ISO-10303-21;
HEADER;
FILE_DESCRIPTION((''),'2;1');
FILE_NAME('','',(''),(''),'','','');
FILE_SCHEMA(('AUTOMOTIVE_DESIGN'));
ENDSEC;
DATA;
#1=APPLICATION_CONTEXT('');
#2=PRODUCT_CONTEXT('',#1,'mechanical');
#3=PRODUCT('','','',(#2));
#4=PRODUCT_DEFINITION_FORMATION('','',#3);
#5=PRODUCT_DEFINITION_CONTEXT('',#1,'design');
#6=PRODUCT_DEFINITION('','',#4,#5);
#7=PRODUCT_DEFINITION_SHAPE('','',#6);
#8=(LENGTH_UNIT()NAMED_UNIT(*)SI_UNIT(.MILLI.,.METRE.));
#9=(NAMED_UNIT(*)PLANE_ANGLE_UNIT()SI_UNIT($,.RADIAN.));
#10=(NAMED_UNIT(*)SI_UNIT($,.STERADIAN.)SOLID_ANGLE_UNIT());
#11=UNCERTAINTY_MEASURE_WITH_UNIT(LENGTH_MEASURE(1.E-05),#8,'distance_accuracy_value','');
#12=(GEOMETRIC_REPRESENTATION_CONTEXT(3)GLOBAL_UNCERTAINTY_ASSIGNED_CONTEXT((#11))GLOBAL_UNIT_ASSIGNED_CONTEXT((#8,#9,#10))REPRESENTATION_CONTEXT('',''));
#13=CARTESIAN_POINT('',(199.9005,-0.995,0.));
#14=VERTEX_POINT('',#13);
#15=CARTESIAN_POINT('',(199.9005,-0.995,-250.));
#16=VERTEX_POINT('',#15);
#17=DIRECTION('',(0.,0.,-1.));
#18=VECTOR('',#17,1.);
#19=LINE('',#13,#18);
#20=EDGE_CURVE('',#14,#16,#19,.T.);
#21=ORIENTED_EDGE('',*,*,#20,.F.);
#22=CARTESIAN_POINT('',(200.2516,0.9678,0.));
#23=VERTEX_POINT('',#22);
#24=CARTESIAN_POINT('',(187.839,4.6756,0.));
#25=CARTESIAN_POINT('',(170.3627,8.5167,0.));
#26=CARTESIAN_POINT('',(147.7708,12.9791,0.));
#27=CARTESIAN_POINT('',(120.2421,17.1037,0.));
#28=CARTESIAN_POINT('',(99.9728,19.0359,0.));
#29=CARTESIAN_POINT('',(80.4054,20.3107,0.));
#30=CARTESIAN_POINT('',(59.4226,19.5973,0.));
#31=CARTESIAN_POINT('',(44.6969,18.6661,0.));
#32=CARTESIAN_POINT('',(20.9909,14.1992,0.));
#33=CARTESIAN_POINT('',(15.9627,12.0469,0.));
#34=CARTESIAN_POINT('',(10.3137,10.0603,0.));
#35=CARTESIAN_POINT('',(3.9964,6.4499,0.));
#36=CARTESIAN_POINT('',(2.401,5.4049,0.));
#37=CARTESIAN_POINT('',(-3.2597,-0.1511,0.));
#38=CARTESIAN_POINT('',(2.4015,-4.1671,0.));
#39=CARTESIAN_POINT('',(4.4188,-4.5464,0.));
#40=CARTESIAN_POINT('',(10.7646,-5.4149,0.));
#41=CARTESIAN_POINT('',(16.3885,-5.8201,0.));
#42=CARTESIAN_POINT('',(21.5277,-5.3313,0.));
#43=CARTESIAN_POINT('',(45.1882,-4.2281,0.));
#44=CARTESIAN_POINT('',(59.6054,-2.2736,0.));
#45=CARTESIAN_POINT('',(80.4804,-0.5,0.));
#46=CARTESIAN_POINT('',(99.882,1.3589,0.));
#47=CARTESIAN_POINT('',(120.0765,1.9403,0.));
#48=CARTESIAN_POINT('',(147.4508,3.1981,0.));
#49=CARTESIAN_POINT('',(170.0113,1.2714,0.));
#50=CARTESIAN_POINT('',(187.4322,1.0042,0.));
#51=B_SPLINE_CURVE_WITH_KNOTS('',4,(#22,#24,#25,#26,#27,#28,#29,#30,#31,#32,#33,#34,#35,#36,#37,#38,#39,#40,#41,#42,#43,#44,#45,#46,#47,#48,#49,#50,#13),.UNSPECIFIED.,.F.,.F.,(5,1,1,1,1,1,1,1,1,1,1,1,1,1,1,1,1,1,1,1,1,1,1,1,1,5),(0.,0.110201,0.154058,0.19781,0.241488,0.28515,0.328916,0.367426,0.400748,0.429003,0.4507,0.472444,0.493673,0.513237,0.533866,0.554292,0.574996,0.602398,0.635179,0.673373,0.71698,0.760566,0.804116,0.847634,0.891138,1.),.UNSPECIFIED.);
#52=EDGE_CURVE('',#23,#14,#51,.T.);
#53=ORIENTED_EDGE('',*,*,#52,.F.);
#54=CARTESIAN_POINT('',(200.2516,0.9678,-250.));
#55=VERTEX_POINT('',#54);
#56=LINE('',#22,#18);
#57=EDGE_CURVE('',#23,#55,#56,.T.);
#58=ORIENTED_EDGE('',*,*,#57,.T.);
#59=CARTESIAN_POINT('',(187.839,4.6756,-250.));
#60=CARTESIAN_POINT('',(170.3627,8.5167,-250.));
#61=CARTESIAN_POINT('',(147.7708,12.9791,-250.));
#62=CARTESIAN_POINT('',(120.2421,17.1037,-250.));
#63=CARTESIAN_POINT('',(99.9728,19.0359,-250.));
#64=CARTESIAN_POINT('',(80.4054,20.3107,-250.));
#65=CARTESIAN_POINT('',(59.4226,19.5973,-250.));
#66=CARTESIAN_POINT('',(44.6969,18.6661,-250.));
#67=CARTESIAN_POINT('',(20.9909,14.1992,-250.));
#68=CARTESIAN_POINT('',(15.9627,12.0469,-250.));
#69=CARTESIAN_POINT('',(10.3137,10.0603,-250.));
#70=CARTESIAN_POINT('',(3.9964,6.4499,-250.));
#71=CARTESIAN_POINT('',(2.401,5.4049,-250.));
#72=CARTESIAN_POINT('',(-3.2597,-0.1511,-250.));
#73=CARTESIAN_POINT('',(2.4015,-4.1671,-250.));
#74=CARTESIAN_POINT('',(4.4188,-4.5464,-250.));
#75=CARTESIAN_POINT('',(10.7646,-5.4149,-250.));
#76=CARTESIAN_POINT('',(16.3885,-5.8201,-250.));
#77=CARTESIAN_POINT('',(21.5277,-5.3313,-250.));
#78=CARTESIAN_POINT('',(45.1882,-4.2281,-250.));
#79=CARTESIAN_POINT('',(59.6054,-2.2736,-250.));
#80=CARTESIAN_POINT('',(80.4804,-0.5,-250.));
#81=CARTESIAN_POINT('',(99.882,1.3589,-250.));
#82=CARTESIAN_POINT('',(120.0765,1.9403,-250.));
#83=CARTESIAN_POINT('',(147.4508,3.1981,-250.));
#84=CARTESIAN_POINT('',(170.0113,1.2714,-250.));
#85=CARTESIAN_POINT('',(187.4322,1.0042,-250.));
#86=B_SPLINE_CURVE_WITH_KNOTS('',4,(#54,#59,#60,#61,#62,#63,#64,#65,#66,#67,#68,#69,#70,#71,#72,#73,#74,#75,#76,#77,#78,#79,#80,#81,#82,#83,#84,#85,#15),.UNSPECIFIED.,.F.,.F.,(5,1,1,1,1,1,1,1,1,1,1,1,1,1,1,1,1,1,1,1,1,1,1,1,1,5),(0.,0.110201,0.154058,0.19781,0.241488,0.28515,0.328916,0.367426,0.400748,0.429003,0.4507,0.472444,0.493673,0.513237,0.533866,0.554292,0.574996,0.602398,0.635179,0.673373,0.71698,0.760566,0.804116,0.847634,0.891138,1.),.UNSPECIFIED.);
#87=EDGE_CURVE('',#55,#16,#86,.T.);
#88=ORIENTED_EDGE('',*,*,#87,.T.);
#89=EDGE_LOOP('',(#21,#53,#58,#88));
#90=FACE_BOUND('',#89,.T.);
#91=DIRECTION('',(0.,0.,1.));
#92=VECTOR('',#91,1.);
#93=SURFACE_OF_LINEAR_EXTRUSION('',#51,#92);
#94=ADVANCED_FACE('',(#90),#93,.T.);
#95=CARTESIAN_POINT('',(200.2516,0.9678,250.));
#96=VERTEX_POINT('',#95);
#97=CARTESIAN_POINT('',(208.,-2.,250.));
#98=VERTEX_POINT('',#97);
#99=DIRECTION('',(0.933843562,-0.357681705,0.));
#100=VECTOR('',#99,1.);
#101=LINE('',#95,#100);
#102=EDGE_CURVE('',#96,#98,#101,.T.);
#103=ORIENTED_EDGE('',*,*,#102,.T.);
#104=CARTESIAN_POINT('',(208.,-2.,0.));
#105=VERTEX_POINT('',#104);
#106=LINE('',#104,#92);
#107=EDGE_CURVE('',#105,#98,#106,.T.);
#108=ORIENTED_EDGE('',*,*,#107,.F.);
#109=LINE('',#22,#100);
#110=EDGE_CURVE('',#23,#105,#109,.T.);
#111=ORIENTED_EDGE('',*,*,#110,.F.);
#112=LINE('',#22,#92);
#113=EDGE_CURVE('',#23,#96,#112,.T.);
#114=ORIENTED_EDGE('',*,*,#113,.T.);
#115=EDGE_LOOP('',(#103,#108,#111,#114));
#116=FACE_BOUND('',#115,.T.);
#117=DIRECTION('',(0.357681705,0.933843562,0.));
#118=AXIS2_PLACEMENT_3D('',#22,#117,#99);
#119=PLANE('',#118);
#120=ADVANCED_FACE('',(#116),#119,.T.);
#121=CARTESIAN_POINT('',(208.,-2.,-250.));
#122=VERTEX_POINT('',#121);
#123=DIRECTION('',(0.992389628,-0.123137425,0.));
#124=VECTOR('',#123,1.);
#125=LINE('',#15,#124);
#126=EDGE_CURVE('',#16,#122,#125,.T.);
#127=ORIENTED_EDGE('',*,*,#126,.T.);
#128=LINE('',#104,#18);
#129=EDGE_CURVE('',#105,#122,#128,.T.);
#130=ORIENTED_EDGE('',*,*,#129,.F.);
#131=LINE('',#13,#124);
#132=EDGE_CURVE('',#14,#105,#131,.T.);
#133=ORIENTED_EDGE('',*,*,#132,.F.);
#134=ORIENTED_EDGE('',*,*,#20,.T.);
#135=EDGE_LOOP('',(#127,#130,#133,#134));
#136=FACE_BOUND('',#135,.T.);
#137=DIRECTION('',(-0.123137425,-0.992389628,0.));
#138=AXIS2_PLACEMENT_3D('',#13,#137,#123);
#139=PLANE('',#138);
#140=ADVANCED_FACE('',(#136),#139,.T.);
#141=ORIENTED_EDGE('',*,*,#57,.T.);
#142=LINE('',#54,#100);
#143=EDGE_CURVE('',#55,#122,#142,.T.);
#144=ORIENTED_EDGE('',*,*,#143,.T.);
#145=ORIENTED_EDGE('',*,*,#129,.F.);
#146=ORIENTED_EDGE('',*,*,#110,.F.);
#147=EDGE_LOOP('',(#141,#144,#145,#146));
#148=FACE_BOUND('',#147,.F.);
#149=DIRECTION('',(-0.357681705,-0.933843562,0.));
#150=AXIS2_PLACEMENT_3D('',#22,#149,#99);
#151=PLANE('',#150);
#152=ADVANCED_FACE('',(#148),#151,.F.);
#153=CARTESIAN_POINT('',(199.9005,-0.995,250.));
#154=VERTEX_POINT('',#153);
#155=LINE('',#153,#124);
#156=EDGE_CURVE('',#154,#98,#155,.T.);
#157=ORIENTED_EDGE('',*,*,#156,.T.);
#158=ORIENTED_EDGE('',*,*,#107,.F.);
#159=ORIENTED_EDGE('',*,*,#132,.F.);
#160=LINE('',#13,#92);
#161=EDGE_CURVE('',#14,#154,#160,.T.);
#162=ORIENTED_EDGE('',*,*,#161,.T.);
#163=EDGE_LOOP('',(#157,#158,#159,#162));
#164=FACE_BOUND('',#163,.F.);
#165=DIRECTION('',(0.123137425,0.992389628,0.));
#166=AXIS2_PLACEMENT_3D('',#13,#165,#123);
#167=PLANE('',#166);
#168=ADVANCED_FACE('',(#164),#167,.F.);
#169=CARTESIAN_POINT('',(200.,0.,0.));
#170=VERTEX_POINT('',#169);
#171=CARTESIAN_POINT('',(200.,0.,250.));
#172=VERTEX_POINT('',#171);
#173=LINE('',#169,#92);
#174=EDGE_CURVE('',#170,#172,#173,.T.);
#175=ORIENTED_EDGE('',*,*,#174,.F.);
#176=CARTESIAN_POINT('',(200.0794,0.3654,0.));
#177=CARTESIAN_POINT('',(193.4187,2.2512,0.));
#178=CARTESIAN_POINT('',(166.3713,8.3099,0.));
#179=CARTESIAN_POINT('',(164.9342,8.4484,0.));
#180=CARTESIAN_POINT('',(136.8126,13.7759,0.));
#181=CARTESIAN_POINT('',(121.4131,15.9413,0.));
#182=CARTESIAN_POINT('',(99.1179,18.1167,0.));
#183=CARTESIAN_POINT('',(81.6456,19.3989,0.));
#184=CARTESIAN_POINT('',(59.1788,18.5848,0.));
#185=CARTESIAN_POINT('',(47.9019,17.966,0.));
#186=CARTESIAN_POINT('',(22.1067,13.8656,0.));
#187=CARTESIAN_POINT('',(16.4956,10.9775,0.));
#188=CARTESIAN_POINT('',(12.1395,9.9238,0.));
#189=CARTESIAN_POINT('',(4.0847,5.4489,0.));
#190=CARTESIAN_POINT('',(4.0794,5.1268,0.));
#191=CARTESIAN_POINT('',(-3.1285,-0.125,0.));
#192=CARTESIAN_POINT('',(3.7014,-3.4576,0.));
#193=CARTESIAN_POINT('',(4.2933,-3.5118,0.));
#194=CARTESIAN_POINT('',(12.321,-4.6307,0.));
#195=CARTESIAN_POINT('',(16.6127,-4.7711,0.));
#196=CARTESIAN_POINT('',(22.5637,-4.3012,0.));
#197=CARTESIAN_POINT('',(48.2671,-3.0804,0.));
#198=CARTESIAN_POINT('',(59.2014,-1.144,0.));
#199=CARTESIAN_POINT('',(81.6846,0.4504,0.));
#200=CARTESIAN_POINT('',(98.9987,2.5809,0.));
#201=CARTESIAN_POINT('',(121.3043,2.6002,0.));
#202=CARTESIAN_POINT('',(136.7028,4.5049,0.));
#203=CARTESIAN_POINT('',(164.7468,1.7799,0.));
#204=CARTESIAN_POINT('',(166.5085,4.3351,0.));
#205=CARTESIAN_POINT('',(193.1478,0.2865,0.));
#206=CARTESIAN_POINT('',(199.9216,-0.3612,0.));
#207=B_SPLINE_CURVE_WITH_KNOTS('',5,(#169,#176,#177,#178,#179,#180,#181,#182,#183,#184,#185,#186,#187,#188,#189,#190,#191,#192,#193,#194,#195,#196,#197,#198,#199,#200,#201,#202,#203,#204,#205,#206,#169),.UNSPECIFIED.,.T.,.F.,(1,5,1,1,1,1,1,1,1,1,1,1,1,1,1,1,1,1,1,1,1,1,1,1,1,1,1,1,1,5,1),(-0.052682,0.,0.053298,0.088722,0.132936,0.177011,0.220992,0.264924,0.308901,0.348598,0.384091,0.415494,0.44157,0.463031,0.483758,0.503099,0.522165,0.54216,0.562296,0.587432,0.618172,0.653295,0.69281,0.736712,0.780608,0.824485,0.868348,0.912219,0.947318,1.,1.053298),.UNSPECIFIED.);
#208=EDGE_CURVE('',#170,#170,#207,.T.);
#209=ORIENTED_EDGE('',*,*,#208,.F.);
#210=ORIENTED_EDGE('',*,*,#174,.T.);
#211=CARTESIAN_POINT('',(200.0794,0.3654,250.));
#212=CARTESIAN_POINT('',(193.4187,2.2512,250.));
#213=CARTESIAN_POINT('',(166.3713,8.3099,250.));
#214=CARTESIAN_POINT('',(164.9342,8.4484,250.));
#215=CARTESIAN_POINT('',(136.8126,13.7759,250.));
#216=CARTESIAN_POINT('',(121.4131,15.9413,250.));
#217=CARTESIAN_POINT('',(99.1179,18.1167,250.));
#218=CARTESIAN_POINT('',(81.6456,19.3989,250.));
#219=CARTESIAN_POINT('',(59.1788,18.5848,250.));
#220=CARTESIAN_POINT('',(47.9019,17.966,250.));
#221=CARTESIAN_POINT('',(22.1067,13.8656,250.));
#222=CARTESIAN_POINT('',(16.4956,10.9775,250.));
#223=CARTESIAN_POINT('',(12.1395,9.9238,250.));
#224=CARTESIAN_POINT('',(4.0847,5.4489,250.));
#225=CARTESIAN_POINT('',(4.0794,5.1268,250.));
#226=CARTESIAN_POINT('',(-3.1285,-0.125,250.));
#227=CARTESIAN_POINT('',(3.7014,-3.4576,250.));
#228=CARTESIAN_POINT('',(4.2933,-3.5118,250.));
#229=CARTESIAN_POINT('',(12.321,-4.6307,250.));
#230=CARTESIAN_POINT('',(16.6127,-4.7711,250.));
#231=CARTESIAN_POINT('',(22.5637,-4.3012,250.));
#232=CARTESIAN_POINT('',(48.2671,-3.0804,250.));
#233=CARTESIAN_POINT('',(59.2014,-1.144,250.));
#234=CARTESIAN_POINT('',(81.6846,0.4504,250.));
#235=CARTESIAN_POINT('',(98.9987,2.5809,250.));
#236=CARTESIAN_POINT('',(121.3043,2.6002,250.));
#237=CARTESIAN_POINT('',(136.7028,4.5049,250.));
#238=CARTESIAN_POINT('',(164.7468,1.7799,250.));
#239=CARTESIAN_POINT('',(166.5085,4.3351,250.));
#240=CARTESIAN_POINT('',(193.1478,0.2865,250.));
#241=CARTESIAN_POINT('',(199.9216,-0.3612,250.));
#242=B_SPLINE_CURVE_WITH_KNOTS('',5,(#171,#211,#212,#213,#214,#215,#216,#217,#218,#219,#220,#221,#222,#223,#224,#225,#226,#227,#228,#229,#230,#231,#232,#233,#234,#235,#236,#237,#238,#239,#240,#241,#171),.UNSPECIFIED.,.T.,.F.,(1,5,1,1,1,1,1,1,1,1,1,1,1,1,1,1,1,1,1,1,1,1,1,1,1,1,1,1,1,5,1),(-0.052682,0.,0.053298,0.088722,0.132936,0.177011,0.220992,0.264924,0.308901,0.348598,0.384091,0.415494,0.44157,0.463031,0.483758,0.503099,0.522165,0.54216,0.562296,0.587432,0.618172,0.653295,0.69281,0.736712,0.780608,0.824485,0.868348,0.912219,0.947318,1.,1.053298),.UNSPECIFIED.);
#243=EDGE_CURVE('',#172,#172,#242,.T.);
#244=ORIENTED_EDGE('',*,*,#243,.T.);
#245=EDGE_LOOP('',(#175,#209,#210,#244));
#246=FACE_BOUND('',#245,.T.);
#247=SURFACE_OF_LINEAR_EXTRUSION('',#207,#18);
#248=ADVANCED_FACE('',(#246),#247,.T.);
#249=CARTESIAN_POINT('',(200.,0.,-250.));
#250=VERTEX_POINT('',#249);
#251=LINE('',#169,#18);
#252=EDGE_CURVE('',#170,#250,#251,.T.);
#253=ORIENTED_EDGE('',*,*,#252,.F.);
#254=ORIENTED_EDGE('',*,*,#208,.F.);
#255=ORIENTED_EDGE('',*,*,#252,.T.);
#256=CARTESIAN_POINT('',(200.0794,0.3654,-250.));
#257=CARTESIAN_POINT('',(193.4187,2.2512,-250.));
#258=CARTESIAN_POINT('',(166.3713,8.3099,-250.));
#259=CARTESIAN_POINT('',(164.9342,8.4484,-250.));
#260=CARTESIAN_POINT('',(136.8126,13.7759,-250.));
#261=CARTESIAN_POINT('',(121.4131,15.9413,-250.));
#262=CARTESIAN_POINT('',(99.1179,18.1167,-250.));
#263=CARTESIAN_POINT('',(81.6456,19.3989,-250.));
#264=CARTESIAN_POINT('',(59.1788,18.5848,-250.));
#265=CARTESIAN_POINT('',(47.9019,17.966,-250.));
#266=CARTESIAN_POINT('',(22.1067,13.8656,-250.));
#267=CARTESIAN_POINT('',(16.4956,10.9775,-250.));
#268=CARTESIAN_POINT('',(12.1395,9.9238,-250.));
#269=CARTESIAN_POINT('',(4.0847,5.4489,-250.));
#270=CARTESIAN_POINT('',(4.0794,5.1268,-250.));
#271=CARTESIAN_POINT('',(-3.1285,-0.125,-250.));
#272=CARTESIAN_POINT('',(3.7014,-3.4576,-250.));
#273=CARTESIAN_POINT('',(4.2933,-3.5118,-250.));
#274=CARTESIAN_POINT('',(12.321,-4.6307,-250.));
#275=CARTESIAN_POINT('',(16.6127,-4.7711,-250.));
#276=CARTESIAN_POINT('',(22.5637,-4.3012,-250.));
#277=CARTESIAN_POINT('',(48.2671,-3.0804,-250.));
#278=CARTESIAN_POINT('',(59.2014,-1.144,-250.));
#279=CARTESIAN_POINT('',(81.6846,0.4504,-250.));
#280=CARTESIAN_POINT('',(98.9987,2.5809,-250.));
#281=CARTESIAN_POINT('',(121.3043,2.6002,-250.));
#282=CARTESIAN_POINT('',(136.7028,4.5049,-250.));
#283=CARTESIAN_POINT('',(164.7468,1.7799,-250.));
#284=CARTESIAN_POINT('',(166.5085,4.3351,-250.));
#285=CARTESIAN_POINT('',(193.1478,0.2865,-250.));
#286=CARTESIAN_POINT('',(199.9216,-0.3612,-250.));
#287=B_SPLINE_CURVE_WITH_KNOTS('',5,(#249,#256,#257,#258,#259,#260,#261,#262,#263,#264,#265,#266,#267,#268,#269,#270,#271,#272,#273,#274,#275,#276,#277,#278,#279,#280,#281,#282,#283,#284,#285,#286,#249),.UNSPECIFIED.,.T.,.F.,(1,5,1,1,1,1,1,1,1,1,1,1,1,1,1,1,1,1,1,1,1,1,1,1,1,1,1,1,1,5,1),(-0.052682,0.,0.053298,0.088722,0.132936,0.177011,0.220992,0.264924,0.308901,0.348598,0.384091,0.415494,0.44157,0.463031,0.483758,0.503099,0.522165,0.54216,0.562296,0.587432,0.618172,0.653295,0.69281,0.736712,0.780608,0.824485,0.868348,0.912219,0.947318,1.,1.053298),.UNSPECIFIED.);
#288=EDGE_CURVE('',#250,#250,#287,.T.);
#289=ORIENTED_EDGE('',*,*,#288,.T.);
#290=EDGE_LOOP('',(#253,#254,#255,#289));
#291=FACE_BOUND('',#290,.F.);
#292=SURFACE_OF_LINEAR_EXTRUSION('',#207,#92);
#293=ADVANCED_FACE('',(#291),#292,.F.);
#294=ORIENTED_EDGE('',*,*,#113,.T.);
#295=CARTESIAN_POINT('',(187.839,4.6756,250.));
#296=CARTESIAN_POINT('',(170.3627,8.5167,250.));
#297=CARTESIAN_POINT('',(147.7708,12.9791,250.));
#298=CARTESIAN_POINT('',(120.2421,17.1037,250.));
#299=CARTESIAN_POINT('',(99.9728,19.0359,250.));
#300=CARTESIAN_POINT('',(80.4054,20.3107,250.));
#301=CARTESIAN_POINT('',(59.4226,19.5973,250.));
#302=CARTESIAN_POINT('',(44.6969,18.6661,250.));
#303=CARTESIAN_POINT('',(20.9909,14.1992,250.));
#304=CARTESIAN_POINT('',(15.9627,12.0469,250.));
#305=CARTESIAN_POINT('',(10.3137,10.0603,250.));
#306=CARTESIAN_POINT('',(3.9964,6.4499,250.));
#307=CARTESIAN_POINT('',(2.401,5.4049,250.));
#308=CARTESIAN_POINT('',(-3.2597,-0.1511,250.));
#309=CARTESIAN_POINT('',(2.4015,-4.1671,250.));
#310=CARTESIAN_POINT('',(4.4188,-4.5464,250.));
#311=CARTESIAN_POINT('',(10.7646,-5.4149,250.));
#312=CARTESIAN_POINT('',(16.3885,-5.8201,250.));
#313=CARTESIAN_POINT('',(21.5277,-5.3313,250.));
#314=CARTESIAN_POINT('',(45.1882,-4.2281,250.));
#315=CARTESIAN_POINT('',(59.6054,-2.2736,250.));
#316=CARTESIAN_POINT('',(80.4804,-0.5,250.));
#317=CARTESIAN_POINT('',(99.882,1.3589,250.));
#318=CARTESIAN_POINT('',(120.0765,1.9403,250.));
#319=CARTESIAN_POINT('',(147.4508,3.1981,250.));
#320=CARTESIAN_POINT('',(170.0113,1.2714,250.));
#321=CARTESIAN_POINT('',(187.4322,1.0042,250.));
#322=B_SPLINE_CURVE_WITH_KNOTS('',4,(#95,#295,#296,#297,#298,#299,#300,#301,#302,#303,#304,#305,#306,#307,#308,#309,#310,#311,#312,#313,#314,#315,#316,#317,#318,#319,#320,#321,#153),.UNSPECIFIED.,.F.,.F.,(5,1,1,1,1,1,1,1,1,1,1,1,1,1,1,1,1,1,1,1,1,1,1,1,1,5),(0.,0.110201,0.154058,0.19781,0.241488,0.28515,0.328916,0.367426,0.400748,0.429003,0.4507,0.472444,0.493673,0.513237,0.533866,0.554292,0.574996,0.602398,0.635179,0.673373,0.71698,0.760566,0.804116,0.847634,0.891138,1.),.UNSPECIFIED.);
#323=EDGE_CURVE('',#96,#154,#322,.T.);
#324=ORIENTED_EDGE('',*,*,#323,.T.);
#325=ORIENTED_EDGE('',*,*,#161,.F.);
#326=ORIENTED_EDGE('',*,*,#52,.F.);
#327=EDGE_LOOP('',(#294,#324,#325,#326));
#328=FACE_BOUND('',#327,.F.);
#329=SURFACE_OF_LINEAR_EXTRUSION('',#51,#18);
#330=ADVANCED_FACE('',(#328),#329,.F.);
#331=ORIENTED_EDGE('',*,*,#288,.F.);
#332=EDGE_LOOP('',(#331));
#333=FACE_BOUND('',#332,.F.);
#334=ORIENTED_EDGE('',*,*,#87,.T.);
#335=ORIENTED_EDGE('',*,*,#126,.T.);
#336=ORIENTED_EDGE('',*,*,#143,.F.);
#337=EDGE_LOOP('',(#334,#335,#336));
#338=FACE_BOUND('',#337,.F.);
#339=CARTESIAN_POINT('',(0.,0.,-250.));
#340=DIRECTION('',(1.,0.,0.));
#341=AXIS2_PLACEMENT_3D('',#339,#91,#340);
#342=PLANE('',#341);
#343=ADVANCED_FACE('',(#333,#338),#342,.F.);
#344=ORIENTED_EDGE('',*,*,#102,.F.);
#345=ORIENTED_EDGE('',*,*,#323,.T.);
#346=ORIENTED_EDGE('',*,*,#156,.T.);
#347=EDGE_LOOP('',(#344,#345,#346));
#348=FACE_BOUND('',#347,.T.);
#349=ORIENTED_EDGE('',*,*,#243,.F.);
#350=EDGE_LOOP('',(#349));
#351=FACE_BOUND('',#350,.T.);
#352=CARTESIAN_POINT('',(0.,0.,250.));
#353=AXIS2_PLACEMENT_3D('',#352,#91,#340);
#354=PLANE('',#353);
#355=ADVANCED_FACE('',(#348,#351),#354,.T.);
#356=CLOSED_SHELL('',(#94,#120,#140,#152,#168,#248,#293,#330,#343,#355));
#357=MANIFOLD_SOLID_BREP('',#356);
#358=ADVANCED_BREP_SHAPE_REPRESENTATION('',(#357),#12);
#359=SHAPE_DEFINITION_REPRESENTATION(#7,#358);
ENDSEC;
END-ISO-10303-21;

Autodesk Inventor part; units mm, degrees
ref_plane "YZ Plane" through (0, 0, 0) normal (1, 0, 0) x (0, 1, 0)
ref_plane "XZ Plane" through (0, 0, 0) normal (0, 1, 0) x (-1, 0, 0)
ref_plane "XY Plane" through (0, 0, 0) normal (0, 0, 1) x (1, 0, 0)
sketch "Sketch1" plane through (0, 0, 0) normal (0, 0, 1) x (1, 0, 0)
  spline S0 degree 5 poles (200, 0) (200.0794, 0.3654) (193.4187, 2.2512) (166.3713, 8.3099) (164.9342, 8.4484) (136.8126, 13.7759) (121.4131, 15.9413) (99.1179, 18.1167) (81.6456, 19.3989) (59.1788, 18.5848) (47.9019, 17.966) (22.1067, 13.8656) (16.4956, 10.9775) (12.1395, 9.9238) (4.0847, 5.4489) (4.0794, 5.1268) (-3.1285, -0.125) (3.7014, -3.4576) (4.2933, -3.5118) (12.321, -4.6307) (16.6127, -4.7711) (22.5637, -4.3012) (48.2671, -3.0804) (59.2014, -1.144) (81.6846, 0.4504) (98.9987, 2.5809) (121.3043, 2.6002) (136.7028, 4.5049) (164.7468, 1.7799) (166.5085, 4.3351) (193.1478, 0.2865) (199.9216, -0.3612) (200, 0) knots 0 0 0 0 0 0 0.053298 0.088722 0.132936 0.177011 0.220992 0.264924 0.308901 0.348598 0.384091 0.415494 0.44157 0.463031 0.483758 0.503099 0.522165 0.54216 0.562296 0.587432 0.618172 0.653295 0.69281 0.736712 0.780608 0.824485 0.868348 0.912219 0.947318 1 1 1 1 1 1
  spline S1 degree 4 poles (200.2516, 0.9678) (187.839, 4.6756) (170.3627, 8.5167) (147.7708, 12.9791) (120.2421, 17.1037) (99.9728, 19.0359) (80.4054, 20.3107) (59.4226, 19.5973) (44.6969, 18.6661) (20.9909, 14.1992) (15.9627, 12.0469) (10.3137, 10.0603) (3.9964, 6.4499) (2.401, 5.4049) (-3.2597, -0.1511) (2.4015, -4.1671) (4.4188, -4.5464) (10.7646, -5.4149) (16.3885, -5.8201) (21.5277, -5.3313) (45.1882, -4.2281) (59.6054, -2.2736) (80.4804, -0.5) (99.882, 1.3589) (120.0765, 1.9403) (147.4508, 3.1981) (170.0113, 1.2714) (187.4322, 1.0042) (199.9005, -0.995) knots 0 0 0 0 0 0.110201 0.154058 0.19781 0.241488 0.28515 0.328916 0.367426 0.400748 0.429003 0.4507 0.472444 0.493673 0.513237 0.533866 0.554292 0.574996 0.602398 0.635179 0.673373 0.71698 0.760566 0.804116 0.847634 0.891138 1 1 1 1 1
  line L0 (199.9005, -0.995) -> (208, -2)
  line L1 (200.2516, 0.9678) -> (208, -2)
  point P0 (160, 9.4)
  point P1 (140, 13)
  point P2 (120, 15.9)
  point P3 (100, 17.9)
  point P4 (80, 18.9)
  point P5 (60, 18.5)
  point P6 (40, 16.5)
  point P7 (20, 12.4)
  point P8 (15, 10.676)
  point P9 (10, 8.55)
  point P10 (5, 5.824)
  point P11 (2.5, 3.962)
  point P12 (0, 0)
  point P13 (2.5, -2.738)
  point P14 (5, -3.576)
  point P15 (10, -4.25)
  point P16 (15, -4.626)
  point P17 (20, -4.5)
  point P18 (40, -3.3)
  point P19 (60, -1.4)
  point P20 (80, 0.5)
  point P21 (100, 2.1)
  point P22 (120, 3)
  point P23 (140, 3.5)
  point P24 (160, 3)
  point P25 (180, 2)
  point P26 (180.2286, 6.1735)
  point P27 (160.1914, 10.3815)
  point P28 (140.1603, 13.9871)
  point P29 (120.1215, 16.8926)
  point P30 (100.0747, 18.8972)
  point P31 (80.015, 19.8999)
  point P32 (59.9402, 19.4982)
  point P33 (39.8496, 17.4886)
  point P34 (19.736, 13.3645)
  point P35 (14.6411, 11.6094)
  point P36 (9.5645, 9.4502)
  point P37 (4.4607, 6.6661)
  point P38 (1.7661, 4.6413)
  point P39 (-0.9961, -0.0884)
  point P40 (1.9544, -3.576)
  point P41 (4.7733, -4.55)
  point P42 (9.8957, -5.2445)
  point P43 (14.9751, -5.6257)
  point P44 (20.0425, -5.4991)
  point P45 (40.0772, -4.297)
  point P46 (60.0946, -2.3955)
  point P47 (80.0872, -0.4962)
  point P48 (100.0624, 1.1019)
  point P49 (120.035, 2.0006)
  point P50 (140, 2.5)
  point P51 (159.9625, 2.0007)
  point P52 (179.9253, 1.0028)
sketch "Sketch2" plane through (0, 0, 0) normal (0, 0, 1) x (1, 0, 0)
  point P0 (0, 0)
extrude "Extrusion1" add sketch "Sketch1" along normal mid plane 500
properties part number "wing"
